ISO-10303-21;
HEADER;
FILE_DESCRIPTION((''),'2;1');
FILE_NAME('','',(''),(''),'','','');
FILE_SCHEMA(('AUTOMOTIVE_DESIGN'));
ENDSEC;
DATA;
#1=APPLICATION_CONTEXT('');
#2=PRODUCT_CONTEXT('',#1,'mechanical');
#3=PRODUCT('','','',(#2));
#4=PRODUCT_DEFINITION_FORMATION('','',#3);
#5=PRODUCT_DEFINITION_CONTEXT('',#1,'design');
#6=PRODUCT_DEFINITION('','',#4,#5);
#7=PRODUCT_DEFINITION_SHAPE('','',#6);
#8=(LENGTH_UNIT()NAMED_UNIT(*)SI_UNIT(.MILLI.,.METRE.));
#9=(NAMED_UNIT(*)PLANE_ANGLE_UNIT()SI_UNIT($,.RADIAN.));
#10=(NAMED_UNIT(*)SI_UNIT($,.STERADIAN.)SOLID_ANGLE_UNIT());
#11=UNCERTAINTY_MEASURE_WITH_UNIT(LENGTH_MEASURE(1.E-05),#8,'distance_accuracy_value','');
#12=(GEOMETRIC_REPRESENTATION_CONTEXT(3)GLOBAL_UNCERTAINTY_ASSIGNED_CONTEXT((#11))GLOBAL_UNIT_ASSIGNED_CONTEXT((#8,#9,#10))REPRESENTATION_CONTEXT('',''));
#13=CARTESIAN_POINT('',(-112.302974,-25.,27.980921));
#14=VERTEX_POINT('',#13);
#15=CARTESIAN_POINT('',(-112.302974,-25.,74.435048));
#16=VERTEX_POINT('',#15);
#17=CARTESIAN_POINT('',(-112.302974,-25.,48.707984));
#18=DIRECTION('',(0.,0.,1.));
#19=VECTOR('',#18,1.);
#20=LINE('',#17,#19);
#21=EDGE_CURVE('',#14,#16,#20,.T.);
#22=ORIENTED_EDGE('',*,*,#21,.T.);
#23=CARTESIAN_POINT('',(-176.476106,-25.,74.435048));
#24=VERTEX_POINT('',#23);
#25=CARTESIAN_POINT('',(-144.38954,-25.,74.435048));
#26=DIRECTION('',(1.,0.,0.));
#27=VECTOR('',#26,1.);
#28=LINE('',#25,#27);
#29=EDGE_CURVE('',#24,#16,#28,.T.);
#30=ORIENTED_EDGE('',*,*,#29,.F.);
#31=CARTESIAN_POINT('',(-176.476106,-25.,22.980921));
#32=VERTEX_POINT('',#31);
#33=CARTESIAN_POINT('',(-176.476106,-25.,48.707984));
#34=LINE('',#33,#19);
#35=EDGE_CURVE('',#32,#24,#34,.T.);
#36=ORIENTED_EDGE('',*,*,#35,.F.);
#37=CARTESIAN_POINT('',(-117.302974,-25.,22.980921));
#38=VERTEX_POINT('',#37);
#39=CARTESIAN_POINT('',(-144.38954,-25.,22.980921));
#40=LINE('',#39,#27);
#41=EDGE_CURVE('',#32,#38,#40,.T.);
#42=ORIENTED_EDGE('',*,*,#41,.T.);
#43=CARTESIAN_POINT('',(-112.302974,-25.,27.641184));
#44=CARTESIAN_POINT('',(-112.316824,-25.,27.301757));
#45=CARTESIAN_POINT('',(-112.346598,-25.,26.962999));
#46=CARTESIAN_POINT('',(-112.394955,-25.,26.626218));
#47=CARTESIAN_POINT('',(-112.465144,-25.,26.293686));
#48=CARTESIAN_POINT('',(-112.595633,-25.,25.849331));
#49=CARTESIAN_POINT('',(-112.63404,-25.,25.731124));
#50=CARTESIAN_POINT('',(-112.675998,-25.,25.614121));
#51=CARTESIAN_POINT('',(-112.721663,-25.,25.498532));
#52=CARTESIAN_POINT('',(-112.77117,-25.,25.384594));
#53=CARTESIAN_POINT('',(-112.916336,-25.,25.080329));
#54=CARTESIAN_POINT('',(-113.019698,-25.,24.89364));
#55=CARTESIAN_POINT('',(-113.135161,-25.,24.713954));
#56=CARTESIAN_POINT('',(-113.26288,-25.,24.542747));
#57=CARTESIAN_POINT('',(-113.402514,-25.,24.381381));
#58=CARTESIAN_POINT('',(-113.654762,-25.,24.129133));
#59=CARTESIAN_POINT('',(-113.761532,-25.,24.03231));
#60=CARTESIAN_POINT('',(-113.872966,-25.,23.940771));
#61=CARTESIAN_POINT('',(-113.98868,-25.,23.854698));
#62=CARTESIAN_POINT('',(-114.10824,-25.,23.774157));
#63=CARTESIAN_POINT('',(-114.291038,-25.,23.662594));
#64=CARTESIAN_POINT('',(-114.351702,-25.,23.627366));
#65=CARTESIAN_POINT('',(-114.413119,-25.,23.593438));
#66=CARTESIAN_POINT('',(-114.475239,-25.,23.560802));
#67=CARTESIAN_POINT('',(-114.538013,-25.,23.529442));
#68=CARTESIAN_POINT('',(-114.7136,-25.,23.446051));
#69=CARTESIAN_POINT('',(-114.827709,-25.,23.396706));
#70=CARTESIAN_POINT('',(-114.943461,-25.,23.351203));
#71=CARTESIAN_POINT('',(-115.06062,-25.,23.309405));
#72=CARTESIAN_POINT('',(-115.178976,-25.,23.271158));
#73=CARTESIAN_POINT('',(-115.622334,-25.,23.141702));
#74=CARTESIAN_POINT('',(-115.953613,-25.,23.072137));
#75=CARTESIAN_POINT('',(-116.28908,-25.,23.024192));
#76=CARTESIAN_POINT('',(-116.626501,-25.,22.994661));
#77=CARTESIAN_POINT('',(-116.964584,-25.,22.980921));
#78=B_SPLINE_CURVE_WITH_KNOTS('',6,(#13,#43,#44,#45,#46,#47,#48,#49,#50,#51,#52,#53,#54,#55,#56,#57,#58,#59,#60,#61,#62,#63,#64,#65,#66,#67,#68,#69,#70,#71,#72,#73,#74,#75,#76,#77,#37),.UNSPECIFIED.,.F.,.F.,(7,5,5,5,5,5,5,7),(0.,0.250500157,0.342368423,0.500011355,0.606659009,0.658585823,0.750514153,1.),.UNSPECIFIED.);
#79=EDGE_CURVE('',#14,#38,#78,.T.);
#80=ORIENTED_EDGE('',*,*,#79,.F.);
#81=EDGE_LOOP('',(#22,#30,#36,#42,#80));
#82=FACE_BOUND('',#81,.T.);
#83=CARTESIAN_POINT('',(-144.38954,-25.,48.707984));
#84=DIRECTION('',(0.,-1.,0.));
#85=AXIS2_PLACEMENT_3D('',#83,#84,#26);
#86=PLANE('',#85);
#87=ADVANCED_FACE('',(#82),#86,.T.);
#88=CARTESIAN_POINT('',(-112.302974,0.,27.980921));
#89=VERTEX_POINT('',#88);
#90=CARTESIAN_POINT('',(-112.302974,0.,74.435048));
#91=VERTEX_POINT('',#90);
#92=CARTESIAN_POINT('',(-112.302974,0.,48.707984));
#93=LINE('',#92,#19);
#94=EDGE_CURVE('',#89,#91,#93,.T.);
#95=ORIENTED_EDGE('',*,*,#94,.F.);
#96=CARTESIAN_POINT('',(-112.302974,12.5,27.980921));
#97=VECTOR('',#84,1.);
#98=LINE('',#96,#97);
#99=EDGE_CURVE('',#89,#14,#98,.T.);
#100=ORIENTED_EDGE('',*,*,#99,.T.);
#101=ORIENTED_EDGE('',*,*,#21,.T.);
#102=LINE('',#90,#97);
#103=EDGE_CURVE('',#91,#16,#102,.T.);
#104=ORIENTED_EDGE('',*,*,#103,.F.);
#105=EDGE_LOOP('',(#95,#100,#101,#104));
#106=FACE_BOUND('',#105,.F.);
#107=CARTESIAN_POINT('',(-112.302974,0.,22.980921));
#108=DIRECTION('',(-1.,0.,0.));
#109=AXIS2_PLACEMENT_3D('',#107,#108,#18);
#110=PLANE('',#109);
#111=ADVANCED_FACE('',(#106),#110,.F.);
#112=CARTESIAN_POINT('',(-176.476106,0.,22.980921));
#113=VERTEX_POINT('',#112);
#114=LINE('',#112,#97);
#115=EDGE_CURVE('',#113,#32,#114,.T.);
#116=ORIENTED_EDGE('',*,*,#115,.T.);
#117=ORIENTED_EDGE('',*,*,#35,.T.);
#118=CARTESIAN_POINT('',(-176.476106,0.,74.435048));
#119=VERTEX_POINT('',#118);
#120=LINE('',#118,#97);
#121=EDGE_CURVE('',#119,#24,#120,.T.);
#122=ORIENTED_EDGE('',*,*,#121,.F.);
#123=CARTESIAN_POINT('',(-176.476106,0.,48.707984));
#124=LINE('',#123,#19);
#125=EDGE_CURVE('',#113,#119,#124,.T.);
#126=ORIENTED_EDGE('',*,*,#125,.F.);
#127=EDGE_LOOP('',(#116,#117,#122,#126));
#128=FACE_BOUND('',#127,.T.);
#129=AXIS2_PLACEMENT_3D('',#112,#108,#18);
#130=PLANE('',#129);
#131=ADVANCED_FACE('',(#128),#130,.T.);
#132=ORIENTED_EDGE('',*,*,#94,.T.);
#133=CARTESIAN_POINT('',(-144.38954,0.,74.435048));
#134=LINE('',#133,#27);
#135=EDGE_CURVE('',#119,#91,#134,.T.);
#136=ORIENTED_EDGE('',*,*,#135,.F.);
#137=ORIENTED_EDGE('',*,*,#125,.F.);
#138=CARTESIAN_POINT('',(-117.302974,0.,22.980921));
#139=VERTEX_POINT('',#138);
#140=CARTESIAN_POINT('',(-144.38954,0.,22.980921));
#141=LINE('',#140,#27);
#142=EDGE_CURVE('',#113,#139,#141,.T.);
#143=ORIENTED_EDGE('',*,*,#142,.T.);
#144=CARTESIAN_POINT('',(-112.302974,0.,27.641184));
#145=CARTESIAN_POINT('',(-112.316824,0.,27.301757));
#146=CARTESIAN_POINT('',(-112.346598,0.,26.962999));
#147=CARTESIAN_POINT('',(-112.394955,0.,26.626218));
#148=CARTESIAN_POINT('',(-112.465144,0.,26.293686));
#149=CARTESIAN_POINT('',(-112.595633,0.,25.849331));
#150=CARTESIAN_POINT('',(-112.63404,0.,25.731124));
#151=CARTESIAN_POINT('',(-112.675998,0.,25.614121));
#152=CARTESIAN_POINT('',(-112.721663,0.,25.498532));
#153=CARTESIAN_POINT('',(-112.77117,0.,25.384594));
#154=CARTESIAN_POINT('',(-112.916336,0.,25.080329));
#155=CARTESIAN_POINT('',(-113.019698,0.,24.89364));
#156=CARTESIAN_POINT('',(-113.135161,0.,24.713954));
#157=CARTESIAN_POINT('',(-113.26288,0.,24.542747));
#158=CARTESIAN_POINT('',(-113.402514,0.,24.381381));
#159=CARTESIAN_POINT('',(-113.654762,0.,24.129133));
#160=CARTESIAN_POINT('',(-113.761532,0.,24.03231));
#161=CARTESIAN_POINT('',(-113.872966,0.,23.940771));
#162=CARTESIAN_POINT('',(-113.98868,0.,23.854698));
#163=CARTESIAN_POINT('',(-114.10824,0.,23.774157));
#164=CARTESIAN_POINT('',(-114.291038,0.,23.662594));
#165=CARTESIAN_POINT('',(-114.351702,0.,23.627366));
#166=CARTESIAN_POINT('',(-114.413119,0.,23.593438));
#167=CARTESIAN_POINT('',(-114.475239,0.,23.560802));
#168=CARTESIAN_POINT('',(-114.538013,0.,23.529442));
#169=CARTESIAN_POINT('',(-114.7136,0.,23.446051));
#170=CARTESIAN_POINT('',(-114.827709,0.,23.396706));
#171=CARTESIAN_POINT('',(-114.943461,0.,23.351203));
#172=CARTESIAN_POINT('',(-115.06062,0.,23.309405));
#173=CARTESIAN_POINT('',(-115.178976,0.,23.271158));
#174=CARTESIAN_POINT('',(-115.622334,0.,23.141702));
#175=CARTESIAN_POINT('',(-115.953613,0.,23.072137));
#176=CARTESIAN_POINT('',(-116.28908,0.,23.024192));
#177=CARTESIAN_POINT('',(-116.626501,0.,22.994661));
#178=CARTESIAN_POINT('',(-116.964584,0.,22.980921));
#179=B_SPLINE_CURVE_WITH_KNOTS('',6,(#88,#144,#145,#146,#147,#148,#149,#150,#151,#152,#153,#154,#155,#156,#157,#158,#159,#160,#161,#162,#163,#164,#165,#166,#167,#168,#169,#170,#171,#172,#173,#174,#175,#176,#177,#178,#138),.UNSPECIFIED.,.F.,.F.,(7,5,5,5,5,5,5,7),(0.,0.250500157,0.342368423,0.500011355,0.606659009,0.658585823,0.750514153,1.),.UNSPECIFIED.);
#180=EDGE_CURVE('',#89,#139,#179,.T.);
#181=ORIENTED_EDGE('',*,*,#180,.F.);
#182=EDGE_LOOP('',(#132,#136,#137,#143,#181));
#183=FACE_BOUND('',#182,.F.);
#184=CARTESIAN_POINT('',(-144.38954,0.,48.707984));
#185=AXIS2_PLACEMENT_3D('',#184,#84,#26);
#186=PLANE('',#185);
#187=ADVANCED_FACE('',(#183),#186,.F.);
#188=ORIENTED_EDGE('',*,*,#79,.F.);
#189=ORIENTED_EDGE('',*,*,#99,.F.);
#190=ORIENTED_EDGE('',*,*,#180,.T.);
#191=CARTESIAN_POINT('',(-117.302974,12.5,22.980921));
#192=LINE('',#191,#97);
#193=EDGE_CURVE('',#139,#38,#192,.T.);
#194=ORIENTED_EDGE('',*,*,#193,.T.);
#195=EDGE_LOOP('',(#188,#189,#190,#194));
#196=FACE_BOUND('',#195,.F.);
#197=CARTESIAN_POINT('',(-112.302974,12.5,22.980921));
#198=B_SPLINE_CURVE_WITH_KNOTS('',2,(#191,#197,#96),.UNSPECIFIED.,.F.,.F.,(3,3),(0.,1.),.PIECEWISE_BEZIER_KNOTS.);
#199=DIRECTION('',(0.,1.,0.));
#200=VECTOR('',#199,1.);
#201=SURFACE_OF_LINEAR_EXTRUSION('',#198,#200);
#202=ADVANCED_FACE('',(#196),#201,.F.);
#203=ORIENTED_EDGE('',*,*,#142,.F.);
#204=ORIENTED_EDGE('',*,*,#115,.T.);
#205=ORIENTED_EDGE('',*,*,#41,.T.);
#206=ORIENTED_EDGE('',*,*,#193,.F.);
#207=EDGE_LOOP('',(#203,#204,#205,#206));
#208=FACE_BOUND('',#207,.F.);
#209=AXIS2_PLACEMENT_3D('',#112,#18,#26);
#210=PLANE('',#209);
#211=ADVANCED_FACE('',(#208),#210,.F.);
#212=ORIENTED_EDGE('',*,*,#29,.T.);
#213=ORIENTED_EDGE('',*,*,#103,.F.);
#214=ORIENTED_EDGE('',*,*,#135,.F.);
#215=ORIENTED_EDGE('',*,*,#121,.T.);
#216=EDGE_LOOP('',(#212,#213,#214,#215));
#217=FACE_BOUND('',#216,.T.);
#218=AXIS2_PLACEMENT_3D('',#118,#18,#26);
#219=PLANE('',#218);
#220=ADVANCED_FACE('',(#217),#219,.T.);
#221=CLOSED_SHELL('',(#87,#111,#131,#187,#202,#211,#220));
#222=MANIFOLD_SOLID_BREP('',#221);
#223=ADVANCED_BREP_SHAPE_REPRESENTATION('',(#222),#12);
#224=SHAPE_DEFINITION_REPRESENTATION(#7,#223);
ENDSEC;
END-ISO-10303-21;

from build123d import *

# Parameters (mm, degrees)
F0_W        = 64.1731321812
F0_H        = 51.4541268349
F1_DEPTH    = 25
F2_T1_DEPTH = 50


# Not quite as in the source:
# - a fillet or chamfer that OpenCascade refuses, or shapes differently, is made with other operations: its cross-section is extruded or revolved along the edge and cut away or added


with BuildPart() as f1:
    # F0 (on Front) → F1 (new body)
    with BuildSketch(Plane.XZ):
        with Locations((-144.389539957, 48.7079843879)):
            Rectangle(F0_W, F0_H)
    extrude(amount=F1_DEPTH)

    # F2: fillet of radius 5 on 1 edges, made by hand

    # F2_s2 → F2_t1 (cut)
    with BuildSketch(Plane.XZ.offset(-12.5)):
        with BuildLine():
            add(Edge.make_bspline(
                [(-117.3029738665, 22.9809209704), (-112.3029738665, 22.9809209704), (-112.3029738665, 27.9809209704)],
                knots=[0, 0, 0, 1, 1, 1], degree=2, weights=[1, 1, 1]))
            Line((-112.3029738665, 27.9809209704), (-112.3029738665, 22.9809209704))
            Line((-112.3029738665, 22.9809209704), (-117.3029738665, 22.9809209704))
        make_face()
    extrude(amount=F2_T1_DEPTH, mode=Mode.SUBTRACT)


solid = f1.part
